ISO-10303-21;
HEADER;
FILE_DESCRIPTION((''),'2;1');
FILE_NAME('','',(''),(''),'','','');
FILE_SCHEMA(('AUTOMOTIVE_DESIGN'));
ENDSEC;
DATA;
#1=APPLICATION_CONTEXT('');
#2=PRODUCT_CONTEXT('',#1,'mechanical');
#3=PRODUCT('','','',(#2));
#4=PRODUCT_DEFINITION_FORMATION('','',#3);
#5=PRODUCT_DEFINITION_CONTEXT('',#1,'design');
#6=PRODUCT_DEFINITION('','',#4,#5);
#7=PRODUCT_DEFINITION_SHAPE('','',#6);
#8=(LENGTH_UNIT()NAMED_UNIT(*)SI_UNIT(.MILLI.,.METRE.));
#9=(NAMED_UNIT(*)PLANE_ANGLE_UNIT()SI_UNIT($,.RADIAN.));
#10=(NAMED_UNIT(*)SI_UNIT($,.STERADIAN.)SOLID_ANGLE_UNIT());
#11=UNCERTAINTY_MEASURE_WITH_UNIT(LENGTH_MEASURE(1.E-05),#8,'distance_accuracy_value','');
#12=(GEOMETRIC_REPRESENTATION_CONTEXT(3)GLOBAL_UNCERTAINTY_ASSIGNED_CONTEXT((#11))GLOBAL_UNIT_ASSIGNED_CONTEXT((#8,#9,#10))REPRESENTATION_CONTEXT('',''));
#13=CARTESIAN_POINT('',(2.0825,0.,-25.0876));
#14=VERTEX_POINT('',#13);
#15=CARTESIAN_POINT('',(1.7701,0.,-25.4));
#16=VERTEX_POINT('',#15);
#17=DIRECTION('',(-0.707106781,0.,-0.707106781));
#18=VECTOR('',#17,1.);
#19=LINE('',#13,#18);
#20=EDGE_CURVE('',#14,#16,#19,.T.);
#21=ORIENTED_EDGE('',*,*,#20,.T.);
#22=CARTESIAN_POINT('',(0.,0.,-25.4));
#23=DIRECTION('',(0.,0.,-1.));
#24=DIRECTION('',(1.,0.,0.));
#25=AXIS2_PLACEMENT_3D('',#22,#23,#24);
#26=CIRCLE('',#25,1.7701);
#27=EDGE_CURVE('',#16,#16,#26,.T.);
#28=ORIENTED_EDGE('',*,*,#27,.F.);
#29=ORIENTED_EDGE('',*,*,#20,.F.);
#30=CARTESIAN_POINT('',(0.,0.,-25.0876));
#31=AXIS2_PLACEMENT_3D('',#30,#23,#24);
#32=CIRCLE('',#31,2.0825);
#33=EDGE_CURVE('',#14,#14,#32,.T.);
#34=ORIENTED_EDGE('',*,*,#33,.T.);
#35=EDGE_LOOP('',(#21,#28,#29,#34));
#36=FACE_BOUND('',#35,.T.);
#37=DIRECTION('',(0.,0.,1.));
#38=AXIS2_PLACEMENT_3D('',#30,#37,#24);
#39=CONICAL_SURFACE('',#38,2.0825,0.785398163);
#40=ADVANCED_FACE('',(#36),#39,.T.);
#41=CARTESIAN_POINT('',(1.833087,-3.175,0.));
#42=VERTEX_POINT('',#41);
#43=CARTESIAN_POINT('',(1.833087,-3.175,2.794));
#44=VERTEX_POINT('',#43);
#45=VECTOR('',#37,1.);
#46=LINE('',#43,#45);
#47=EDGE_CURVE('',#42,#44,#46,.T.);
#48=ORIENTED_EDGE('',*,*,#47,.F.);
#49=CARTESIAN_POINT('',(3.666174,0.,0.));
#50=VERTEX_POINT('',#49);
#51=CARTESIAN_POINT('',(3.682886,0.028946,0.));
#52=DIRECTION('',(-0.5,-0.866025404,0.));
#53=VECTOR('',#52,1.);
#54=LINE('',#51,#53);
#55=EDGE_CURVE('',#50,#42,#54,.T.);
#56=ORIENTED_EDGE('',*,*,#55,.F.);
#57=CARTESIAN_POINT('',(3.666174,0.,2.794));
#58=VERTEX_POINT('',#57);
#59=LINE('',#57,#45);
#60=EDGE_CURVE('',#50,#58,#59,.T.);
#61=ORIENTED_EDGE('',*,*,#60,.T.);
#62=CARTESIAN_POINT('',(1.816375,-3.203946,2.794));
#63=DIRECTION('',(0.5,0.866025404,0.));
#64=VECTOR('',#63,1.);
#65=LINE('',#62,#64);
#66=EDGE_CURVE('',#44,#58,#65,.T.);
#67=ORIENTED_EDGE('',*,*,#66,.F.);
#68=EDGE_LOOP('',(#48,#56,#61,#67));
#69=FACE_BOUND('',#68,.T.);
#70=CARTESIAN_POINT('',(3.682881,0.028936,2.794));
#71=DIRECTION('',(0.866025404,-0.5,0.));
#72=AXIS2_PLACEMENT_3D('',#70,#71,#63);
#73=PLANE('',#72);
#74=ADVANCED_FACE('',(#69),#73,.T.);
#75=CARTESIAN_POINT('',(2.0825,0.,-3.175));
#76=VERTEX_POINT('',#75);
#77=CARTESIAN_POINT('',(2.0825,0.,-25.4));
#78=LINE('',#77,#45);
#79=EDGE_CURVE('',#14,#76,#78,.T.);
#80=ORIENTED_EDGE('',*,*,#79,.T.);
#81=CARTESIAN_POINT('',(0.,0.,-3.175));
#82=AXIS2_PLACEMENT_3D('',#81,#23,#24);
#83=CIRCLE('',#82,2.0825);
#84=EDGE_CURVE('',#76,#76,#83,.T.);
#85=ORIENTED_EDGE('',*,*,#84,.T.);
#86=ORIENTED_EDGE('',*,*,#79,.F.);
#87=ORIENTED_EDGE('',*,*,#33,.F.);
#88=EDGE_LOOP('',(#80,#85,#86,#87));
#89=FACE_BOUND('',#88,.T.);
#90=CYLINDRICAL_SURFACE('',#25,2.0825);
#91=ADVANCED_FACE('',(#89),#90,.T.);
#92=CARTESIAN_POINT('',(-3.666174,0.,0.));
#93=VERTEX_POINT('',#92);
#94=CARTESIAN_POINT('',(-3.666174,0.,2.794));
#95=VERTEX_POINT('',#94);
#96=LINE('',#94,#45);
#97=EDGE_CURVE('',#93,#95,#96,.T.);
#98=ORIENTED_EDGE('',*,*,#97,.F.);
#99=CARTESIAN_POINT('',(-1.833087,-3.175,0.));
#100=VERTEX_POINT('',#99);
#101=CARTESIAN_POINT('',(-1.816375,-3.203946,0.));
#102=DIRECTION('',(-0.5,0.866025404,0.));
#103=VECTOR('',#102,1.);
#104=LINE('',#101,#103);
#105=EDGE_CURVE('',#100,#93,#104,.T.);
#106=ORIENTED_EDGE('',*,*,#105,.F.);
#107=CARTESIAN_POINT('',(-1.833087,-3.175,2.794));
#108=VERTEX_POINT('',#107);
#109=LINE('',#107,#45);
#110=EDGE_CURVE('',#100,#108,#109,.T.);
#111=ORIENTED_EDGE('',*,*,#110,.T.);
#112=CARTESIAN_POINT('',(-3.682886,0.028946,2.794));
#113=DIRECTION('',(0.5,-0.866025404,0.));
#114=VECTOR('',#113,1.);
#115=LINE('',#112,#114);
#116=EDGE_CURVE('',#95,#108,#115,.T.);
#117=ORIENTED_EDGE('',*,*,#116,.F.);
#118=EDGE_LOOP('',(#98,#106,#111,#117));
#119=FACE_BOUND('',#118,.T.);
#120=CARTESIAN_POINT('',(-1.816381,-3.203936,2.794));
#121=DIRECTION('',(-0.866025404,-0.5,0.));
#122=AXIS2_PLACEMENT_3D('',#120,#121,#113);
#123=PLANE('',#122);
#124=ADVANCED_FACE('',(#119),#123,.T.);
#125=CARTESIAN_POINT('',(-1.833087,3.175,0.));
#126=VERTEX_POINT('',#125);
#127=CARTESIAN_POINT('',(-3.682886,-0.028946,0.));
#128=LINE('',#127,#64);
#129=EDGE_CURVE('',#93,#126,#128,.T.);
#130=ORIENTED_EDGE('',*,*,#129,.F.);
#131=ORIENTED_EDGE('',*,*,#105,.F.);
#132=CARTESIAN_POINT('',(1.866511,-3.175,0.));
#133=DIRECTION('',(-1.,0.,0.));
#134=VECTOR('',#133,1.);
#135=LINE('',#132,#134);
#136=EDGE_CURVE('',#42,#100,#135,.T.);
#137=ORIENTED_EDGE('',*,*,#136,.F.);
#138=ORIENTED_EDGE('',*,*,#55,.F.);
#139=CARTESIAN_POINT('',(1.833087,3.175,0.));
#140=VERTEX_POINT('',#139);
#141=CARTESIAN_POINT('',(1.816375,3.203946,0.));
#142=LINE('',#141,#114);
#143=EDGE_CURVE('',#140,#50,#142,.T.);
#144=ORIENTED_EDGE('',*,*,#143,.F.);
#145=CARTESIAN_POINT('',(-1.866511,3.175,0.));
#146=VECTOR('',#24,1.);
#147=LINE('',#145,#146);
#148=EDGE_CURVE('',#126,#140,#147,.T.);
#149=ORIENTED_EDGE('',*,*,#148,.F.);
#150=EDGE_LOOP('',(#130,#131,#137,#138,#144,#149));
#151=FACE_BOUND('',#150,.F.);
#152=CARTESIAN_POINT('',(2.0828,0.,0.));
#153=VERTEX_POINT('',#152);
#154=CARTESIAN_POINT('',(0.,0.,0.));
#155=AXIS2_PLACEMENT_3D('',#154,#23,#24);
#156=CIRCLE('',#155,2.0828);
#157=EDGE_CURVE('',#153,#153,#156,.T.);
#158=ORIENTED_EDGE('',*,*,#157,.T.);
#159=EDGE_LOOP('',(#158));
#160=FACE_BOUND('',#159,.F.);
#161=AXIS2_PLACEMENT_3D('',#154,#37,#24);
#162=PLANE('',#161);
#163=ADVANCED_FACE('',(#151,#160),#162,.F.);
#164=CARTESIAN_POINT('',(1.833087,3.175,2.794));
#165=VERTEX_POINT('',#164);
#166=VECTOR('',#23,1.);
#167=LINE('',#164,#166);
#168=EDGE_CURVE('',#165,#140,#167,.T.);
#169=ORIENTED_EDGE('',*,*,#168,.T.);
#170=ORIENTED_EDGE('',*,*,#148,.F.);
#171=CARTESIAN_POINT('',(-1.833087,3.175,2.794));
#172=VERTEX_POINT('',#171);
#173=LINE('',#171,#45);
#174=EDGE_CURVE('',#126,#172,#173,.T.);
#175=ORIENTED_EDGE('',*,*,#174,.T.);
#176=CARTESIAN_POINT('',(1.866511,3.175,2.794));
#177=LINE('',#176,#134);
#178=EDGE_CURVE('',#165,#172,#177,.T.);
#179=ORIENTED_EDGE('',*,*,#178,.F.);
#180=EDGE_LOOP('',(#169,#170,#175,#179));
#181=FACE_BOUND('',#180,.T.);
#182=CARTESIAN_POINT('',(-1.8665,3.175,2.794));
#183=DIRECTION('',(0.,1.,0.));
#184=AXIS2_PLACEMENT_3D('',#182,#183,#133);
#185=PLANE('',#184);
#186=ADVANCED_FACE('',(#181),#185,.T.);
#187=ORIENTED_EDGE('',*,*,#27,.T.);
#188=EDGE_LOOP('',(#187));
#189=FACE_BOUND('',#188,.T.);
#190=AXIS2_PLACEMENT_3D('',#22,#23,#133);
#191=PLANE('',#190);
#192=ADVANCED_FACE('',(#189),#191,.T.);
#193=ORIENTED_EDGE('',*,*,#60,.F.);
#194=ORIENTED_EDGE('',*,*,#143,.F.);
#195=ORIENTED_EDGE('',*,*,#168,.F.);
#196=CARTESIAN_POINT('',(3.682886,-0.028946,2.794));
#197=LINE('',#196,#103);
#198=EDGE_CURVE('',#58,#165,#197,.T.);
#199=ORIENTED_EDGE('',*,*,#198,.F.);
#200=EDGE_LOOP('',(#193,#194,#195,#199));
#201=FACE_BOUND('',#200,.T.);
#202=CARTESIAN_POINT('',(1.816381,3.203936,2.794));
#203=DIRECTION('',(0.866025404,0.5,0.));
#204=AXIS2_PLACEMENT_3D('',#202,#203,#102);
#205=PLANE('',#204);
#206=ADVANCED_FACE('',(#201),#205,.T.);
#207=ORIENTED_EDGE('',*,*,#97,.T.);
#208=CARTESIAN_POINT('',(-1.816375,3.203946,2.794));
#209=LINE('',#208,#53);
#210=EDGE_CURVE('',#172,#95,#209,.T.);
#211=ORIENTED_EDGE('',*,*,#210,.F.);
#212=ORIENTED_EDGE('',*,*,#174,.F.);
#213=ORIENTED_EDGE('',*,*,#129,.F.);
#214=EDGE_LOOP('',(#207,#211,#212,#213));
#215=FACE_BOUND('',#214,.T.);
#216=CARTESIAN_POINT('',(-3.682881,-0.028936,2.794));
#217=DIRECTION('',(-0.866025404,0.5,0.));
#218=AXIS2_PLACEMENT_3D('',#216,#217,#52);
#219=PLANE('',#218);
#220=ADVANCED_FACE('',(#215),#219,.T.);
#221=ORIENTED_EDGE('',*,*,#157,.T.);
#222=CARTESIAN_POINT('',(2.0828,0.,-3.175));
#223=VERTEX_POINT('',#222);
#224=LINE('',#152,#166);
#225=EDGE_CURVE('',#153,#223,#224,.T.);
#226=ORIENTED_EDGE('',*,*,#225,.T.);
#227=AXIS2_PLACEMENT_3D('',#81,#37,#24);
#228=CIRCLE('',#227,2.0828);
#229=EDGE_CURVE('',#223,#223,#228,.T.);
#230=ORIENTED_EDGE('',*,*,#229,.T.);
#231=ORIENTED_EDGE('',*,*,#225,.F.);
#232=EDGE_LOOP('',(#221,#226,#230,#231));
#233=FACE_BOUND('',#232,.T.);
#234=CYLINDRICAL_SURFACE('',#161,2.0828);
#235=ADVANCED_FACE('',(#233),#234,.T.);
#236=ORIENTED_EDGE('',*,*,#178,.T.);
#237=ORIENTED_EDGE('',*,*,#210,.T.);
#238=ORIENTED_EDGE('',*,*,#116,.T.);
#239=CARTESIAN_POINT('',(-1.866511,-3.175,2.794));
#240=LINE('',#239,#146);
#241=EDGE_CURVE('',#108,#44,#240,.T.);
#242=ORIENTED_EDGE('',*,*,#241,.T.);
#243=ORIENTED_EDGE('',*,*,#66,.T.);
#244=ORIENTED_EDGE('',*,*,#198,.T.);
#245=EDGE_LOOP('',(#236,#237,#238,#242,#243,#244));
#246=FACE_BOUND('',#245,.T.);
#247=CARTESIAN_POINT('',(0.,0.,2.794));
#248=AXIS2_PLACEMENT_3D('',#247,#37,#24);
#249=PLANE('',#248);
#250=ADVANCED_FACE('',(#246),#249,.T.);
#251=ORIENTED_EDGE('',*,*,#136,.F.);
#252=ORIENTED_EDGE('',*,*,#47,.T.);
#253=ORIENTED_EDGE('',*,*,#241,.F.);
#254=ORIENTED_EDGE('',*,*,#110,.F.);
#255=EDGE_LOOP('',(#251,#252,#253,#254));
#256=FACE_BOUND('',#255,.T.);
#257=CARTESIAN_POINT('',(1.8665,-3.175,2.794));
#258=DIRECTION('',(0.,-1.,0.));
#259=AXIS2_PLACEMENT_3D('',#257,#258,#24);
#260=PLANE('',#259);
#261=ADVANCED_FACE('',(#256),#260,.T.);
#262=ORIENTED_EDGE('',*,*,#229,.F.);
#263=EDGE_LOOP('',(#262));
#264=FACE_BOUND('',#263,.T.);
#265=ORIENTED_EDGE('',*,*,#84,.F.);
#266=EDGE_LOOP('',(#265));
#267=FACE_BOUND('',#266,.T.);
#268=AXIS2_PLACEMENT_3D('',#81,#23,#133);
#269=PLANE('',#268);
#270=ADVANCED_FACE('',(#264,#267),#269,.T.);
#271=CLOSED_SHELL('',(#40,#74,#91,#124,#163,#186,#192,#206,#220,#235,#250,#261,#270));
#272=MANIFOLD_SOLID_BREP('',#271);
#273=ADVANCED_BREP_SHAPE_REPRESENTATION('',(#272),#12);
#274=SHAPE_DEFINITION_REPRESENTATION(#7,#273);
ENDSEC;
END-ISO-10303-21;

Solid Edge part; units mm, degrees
sketch "Sketch1" plane through (0, 0, 0) normal (0, 0, 1) x (1, 0, 0)
  circle A0 centre (0, 0) radius 3.683
  dimension "D1" = 7.366
extrude "Protrusion1" add sketch "Sketch1" along normal blind 2.794
sketch "Sketch2" plane through (0, 0, 0) normal (0, 0, -1) x (1, 0, 0)
  circle A0 centre (0, 0) radius 2.0828
extrude "Protrusion2" add sketch "Sketch2" along normal blind 25.4
sketch "Sketch3" plane through (0, 0, -25.4) normal (0, 0, -1) x (1, 0, 0)
  circle A0 centre (0, 0) radius 2.0825
extrude "Cutout1" cut sketch "Sketch3" against normal blind 22.225 flip side to cut
chamfer "Chamfer_1" distance 0.3124 angle 45 1 edges at (-2.0825, 0, -25.4)
sketch "Sketch4" plane through (0, 0, 2.794) normal (0, 0, 1) x (1, 0, 0)
  line L0 (-1.8665, 3.175) -> (1.8665, 3.175)
  dimension "D1" = 6.35
extrude "Cutout2" cut sketch "Sketch4" against normal up to next material side at (0, 3.225, 2.794)
pattern_circular "Pattern1" count 6 over 360 about axis through (0, 0, 2.794) along (0, 0, 1) of "Cutout2"
properties part number "123334"
